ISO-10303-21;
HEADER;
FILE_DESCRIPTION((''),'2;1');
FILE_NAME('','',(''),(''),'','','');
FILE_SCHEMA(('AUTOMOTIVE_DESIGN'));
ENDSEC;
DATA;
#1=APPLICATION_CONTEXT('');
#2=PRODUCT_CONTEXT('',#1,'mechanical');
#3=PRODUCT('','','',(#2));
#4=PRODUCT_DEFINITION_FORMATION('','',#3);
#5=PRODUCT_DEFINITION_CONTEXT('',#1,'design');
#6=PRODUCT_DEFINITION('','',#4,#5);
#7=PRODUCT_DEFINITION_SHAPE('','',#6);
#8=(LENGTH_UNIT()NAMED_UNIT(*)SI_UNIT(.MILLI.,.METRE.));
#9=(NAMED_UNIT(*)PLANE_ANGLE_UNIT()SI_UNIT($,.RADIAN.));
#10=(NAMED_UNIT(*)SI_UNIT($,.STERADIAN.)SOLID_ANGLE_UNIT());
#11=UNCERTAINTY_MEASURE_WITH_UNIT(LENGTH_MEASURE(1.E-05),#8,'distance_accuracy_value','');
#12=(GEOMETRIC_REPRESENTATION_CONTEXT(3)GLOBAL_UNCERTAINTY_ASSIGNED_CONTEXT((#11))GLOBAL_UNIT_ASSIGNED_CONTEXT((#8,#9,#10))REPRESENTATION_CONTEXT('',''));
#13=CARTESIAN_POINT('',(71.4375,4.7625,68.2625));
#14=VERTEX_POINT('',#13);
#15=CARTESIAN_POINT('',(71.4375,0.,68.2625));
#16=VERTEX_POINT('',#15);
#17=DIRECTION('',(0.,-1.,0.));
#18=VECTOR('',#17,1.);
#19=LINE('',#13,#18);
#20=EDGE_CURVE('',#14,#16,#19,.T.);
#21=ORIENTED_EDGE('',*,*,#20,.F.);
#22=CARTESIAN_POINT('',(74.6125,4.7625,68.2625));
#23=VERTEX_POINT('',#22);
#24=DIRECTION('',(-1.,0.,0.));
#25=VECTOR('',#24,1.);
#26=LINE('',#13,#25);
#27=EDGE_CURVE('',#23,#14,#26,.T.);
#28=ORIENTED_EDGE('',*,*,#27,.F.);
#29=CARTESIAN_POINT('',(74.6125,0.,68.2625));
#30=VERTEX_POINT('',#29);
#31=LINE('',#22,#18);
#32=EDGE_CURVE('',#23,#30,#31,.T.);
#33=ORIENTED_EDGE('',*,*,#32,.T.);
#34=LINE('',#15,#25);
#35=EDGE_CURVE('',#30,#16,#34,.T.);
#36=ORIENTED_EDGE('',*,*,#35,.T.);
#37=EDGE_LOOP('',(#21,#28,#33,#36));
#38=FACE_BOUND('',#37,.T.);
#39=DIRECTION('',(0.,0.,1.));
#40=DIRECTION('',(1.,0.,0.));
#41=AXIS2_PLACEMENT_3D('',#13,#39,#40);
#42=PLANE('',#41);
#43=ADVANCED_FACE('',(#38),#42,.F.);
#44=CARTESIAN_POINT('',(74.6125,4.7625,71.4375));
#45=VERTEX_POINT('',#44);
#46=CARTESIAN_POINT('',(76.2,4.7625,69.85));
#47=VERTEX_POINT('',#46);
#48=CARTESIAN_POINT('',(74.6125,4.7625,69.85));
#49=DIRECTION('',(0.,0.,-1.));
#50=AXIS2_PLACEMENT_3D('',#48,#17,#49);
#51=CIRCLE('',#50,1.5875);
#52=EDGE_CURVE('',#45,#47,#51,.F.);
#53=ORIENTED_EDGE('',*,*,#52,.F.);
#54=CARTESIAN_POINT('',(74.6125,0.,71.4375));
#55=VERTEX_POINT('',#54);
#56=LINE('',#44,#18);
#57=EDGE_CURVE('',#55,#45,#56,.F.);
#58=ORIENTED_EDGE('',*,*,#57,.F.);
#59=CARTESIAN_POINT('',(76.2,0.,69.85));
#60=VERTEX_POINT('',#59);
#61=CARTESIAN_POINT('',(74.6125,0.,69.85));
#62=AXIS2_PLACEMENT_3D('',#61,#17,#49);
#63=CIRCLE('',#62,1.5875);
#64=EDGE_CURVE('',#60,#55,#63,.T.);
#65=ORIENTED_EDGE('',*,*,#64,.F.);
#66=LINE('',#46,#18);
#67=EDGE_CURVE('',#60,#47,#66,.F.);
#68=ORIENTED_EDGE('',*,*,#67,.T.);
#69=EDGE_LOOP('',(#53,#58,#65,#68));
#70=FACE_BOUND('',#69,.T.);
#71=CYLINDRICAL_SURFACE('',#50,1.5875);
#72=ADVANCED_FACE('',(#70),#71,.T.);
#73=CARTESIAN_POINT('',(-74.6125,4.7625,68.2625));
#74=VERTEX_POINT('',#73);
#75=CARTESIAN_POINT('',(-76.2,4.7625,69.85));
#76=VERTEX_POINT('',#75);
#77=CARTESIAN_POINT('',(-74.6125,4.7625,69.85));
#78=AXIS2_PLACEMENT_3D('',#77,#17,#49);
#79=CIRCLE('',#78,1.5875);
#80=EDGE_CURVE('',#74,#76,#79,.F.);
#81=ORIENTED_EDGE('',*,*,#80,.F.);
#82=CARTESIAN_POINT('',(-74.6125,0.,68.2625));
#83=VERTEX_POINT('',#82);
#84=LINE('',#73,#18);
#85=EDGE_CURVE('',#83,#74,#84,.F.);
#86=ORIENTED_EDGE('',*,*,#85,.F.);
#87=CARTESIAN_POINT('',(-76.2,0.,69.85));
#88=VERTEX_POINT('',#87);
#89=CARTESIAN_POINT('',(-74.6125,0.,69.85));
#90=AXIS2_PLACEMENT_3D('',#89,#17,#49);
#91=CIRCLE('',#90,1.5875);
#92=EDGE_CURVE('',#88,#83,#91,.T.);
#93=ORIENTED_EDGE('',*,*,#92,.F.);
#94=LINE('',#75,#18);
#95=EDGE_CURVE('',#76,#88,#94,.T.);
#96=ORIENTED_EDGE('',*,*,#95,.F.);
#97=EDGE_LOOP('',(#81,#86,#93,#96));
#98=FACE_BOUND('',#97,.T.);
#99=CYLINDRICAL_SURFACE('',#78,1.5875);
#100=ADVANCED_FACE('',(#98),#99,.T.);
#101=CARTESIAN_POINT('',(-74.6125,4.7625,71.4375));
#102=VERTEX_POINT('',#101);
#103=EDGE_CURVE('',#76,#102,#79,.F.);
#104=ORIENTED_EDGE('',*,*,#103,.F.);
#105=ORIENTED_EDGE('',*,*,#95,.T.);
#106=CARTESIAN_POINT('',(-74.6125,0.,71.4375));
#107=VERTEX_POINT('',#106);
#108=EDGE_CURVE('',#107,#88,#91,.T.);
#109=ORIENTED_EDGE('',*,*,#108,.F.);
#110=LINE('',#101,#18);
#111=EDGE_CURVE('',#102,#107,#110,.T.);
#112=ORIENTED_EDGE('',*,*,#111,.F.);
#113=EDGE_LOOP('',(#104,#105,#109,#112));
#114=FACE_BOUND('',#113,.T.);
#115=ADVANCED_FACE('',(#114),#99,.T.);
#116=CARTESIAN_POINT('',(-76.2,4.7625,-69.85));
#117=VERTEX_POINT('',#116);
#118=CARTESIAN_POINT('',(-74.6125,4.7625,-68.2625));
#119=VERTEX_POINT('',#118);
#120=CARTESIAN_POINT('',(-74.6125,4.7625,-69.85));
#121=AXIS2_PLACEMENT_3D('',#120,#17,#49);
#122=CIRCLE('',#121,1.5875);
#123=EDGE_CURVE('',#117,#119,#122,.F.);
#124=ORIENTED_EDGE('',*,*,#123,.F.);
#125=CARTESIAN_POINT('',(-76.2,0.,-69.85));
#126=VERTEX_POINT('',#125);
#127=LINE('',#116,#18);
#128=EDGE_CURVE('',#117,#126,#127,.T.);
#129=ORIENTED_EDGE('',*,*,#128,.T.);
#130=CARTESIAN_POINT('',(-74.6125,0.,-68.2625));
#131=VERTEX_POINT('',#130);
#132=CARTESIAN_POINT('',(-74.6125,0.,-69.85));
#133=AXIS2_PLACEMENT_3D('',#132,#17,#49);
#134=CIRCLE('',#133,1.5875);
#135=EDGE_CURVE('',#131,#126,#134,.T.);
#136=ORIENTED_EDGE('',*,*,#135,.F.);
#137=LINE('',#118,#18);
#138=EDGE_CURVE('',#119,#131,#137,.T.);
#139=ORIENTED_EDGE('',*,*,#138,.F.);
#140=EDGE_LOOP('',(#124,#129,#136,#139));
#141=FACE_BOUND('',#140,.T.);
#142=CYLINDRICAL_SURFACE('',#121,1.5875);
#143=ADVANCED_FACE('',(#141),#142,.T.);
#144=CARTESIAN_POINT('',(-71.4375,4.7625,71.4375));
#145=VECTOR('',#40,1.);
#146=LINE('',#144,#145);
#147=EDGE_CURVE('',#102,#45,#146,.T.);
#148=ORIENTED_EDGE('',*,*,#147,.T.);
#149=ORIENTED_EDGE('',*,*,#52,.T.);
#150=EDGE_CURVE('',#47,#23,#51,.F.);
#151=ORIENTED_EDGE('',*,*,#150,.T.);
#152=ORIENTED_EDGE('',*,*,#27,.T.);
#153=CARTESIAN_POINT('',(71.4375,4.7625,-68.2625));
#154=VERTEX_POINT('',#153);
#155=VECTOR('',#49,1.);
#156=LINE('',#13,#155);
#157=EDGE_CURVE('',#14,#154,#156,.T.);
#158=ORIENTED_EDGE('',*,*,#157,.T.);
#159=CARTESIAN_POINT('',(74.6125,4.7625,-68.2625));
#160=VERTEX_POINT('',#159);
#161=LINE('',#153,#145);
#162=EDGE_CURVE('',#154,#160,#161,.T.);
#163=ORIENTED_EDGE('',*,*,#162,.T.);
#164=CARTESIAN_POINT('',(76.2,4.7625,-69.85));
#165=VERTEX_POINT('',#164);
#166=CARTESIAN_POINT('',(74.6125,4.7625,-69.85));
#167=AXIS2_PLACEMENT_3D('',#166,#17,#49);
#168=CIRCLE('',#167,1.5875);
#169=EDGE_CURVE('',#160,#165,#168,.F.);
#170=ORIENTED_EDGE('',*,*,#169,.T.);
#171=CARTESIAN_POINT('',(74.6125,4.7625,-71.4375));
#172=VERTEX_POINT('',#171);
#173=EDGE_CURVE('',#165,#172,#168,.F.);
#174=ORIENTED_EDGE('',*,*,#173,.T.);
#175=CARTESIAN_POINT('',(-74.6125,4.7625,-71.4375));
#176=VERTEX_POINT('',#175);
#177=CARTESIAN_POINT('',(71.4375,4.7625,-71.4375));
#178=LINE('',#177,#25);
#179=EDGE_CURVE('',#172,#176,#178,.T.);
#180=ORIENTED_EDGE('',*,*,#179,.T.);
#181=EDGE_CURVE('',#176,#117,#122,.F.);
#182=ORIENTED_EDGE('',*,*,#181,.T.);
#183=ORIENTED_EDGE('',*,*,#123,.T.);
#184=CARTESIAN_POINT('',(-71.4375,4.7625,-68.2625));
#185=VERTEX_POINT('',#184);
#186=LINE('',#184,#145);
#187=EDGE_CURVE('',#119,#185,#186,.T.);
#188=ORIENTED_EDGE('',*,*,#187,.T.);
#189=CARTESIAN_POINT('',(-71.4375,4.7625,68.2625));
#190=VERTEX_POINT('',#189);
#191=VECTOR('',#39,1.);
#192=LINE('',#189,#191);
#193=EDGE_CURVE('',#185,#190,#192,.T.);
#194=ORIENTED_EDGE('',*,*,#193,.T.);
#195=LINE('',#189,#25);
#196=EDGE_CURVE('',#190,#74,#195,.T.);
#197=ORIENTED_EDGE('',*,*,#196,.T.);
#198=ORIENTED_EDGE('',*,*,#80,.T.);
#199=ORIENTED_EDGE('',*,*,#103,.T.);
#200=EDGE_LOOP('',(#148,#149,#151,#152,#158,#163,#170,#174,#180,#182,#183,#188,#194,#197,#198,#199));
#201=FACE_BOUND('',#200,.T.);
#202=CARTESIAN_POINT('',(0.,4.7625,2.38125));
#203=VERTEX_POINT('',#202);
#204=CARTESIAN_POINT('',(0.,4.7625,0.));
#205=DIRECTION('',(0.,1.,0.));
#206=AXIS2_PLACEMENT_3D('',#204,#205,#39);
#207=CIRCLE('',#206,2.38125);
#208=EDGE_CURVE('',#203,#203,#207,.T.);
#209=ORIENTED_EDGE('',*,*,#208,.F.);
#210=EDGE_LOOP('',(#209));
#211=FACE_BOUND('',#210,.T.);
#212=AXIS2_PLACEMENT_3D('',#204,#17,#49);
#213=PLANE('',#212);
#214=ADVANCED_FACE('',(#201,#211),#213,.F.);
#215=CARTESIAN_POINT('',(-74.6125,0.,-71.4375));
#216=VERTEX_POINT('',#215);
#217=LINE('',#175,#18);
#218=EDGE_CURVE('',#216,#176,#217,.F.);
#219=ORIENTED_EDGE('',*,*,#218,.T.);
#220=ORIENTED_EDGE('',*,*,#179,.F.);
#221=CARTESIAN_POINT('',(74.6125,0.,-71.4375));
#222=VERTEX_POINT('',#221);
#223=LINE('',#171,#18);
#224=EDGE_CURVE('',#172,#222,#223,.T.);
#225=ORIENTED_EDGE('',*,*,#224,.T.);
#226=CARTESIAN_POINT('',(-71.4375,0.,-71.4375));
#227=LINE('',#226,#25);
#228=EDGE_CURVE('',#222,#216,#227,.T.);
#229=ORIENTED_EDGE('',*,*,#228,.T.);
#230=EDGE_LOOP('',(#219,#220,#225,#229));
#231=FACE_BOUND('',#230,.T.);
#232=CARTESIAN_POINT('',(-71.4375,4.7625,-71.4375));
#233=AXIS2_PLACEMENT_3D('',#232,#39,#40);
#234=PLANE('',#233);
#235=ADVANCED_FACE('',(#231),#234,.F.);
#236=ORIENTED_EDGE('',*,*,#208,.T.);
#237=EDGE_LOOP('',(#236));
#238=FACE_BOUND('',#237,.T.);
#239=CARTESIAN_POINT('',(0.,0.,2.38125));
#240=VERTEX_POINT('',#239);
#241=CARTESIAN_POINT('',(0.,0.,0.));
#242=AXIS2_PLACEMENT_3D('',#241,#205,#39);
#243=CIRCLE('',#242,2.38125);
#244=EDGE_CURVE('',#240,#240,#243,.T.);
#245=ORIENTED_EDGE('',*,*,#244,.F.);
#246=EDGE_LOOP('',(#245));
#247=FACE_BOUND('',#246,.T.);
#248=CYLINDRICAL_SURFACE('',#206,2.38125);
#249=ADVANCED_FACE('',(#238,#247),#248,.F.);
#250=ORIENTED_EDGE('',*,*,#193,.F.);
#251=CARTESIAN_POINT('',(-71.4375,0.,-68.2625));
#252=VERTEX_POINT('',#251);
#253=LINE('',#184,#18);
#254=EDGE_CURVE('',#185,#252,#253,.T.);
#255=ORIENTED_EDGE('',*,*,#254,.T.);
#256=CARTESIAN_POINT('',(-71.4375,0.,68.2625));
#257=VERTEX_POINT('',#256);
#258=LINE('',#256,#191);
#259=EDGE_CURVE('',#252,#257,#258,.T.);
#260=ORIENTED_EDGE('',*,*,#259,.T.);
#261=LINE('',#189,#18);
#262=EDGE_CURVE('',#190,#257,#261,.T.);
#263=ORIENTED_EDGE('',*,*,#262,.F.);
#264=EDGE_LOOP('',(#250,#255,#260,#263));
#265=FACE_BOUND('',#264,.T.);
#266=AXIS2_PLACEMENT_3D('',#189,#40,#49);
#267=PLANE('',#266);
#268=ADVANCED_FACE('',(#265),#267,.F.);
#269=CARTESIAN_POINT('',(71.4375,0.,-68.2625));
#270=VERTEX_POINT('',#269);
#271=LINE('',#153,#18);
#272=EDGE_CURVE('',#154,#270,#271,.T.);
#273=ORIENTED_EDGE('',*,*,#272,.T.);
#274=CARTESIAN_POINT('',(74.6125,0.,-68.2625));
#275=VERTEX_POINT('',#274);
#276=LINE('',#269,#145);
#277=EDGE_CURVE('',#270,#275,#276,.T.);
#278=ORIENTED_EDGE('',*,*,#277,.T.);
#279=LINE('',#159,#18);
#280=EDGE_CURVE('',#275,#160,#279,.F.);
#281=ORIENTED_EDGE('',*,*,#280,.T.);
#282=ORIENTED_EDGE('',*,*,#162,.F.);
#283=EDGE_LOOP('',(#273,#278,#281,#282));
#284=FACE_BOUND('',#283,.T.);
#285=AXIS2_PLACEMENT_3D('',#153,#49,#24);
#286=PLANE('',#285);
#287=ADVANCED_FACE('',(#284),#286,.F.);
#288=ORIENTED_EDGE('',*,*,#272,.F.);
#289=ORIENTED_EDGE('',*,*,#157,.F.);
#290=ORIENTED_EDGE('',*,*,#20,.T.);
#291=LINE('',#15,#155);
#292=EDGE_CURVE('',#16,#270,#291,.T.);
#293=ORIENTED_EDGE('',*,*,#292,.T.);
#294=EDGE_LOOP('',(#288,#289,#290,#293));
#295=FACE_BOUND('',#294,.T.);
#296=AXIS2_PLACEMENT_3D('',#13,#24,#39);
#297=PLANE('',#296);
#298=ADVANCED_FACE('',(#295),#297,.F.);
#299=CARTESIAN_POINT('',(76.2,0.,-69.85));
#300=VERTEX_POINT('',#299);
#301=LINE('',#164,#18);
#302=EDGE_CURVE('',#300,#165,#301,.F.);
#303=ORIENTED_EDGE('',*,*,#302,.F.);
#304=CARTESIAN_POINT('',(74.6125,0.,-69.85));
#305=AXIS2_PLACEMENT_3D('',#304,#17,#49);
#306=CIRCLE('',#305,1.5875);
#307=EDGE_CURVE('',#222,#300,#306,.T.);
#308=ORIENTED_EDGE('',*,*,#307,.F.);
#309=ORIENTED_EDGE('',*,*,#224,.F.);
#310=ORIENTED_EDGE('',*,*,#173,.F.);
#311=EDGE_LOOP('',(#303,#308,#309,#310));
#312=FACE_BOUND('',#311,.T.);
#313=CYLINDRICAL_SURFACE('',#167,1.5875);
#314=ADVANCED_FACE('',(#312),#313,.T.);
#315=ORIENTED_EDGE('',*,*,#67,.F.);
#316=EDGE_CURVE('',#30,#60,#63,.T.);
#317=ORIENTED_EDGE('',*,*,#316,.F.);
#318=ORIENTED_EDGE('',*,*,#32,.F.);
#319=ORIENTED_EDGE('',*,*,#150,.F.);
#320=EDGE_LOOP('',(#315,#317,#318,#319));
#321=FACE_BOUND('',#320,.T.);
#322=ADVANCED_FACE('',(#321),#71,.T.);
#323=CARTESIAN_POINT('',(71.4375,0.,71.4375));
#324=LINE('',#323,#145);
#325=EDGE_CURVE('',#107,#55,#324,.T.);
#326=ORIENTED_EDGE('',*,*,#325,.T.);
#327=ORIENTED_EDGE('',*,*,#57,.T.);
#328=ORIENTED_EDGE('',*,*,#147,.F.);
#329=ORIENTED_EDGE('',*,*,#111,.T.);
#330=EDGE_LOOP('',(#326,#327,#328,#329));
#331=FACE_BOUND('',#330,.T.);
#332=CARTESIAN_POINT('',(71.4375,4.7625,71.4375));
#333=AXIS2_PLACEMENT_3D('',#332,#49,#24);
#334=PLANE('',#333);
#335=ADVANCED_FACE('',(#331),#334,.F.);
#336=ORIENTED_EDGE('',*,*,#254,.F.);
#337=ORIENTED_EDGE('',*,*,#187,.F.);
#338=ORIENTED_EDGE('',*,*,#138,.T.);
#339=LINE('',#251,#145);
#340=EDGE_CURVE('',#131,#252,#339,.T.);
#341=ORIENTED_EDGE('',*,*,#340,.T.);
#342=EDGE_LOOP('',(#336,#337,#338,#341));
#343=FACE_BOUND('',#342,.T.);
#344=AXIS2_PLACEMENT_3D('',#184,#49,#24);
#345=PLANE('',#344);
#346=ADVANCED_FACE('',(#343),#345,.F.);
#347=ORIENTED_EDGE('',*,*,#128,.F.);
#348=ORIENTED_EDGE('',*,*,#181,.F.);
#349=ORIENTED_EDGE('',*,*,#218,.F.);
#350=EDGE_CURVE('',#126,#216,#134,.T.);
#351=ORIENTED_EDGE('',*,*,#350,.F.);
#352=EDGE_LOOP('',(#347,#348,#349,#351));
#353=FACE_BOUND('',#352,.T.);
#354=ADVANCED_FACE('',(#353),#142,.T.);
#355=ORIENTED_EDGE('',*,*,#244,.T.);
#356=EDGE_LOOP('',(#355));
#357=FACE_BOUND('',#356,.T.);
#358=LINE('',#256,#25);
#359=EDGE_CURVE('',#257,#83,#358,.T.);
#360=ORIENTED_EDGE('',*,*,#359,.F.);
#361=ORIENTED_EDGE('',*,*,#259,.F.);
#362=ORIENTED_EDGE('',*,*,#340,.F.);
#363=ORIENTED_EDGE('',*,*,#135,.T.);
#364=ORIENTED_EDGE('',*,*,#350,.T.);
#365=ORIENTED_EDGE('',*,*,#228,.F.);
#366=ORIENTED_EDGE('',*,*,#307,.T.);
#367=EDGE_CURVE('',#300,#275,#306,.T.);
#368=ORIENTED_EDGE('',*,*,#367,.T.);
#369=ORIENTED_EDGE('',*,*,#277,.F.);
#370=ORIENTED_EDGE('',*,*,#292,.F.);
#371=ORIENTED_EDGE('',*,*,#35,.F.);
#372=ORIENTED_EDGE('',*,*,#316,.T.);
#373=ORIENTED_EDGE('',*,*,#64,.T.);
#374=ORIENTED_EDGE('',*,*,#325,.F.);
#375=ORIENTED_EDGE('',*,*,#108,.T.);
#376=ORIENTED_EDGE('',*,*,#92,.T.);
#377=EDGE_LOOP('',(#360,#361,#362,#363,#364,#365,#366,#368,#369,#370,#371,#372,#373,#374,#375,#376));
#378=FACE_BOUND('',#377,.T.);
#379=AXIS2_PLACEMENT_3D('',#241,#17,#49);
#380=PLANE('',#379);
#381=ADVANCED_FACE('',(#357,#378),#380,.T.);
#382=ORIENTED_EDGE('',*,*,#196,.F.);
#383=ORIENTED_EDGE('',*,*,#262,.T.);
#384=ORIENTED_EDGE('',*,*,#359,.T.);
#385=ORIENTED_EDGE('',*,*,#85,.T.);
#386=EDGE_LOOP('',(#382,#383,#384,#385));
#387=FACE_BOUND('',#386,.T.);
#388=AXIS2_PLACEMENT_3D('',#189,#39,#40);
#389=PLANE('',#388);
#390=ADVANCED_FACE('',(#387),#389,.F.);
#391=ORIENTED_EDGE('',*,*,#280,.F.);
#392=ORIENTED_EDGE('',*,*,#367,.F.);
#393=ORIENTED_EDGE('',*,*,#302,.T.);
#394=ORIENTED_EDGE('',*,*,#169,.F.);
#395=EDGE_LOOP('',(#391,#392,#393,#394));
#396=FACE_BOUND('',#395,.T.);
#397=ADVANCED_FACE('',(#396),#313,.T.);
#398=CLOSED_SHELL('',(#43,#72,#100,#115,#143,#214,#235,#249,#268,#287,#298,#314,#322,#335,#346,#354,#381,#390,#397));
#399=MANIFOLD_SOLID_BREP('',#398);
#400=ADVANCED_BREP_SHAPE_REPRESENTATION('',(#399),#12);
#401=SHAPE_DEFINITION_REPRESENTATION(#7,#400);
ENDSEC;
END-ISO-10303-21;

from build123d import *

# Parameters (mm, degrees)
BOSS_EXTRUDE1_DEPTH            = 4.7625
F_3_16_0_1875_DIAMETER_HOLE1_D = 4.7625
FILLET1_R                      = 1.5875


with BuildPart() as part:
    # Sketch1 → Boss-Extrude1 (new body)
    with BuildSketch(Plane(origin=(0, 0, 0), x_dir=(1, 0, 0), z_dir=(0, 1, 0))):
        Polygon((-71.4375, -71.4375), (71.4375, -71.4375), (76.2, -71.4375), (76.2, -68.2625), (71.4375, -68.2625), (71.4375, 68.2625), (76.2, 68.2625), (76.2, 71.4375), (71.4375, 71.4375), (-71.4375, 71.4375), (-76.2, 71.4375), (-76.2, 68.2625), (-71.4375, 68.2625), (-71.4375, -68.2625), (-76.2, -68.2625), (-76.2, -71.4375), align=None)
    extrude(amount=BOSS_EXTRUDE1_DEPTH)

    # 3/16 (0.1875) Diameter Hole1 (through all)
    with Locations(Plane(origin=(0, 4.7625, 0), x_dir=(1, 0, 0), z_dir=(0, 1, 0))):
        with Locations((0, 0)):
            Hole(F_3_16_0_1875_DIAMETER_HOLE1_D / 2)

    # Fillet1
    fillet1_edges = [part.edges().sort_by_distance(p)[0] for p in [
        (-76.2, 2.38125, 71.4375),
        (-76.2, 2.38125, 68.2625),
        (76.2, 2.38125, 71.4375),
        (76.2, 2.38125, 68.2625),
        (76.2, 2.38125, -68.2625),
        (76.2, 2.38125, -71.4375),
        (-76.2, 2.38125, -68.2625),
        (-76.2, 2.38125, -71.4375),
    ]]
    fillet(fillet1_edges, radius=FILLET1_R - 0.0001)  # a hair under: the kernel refuses the full size


solid = part.part
